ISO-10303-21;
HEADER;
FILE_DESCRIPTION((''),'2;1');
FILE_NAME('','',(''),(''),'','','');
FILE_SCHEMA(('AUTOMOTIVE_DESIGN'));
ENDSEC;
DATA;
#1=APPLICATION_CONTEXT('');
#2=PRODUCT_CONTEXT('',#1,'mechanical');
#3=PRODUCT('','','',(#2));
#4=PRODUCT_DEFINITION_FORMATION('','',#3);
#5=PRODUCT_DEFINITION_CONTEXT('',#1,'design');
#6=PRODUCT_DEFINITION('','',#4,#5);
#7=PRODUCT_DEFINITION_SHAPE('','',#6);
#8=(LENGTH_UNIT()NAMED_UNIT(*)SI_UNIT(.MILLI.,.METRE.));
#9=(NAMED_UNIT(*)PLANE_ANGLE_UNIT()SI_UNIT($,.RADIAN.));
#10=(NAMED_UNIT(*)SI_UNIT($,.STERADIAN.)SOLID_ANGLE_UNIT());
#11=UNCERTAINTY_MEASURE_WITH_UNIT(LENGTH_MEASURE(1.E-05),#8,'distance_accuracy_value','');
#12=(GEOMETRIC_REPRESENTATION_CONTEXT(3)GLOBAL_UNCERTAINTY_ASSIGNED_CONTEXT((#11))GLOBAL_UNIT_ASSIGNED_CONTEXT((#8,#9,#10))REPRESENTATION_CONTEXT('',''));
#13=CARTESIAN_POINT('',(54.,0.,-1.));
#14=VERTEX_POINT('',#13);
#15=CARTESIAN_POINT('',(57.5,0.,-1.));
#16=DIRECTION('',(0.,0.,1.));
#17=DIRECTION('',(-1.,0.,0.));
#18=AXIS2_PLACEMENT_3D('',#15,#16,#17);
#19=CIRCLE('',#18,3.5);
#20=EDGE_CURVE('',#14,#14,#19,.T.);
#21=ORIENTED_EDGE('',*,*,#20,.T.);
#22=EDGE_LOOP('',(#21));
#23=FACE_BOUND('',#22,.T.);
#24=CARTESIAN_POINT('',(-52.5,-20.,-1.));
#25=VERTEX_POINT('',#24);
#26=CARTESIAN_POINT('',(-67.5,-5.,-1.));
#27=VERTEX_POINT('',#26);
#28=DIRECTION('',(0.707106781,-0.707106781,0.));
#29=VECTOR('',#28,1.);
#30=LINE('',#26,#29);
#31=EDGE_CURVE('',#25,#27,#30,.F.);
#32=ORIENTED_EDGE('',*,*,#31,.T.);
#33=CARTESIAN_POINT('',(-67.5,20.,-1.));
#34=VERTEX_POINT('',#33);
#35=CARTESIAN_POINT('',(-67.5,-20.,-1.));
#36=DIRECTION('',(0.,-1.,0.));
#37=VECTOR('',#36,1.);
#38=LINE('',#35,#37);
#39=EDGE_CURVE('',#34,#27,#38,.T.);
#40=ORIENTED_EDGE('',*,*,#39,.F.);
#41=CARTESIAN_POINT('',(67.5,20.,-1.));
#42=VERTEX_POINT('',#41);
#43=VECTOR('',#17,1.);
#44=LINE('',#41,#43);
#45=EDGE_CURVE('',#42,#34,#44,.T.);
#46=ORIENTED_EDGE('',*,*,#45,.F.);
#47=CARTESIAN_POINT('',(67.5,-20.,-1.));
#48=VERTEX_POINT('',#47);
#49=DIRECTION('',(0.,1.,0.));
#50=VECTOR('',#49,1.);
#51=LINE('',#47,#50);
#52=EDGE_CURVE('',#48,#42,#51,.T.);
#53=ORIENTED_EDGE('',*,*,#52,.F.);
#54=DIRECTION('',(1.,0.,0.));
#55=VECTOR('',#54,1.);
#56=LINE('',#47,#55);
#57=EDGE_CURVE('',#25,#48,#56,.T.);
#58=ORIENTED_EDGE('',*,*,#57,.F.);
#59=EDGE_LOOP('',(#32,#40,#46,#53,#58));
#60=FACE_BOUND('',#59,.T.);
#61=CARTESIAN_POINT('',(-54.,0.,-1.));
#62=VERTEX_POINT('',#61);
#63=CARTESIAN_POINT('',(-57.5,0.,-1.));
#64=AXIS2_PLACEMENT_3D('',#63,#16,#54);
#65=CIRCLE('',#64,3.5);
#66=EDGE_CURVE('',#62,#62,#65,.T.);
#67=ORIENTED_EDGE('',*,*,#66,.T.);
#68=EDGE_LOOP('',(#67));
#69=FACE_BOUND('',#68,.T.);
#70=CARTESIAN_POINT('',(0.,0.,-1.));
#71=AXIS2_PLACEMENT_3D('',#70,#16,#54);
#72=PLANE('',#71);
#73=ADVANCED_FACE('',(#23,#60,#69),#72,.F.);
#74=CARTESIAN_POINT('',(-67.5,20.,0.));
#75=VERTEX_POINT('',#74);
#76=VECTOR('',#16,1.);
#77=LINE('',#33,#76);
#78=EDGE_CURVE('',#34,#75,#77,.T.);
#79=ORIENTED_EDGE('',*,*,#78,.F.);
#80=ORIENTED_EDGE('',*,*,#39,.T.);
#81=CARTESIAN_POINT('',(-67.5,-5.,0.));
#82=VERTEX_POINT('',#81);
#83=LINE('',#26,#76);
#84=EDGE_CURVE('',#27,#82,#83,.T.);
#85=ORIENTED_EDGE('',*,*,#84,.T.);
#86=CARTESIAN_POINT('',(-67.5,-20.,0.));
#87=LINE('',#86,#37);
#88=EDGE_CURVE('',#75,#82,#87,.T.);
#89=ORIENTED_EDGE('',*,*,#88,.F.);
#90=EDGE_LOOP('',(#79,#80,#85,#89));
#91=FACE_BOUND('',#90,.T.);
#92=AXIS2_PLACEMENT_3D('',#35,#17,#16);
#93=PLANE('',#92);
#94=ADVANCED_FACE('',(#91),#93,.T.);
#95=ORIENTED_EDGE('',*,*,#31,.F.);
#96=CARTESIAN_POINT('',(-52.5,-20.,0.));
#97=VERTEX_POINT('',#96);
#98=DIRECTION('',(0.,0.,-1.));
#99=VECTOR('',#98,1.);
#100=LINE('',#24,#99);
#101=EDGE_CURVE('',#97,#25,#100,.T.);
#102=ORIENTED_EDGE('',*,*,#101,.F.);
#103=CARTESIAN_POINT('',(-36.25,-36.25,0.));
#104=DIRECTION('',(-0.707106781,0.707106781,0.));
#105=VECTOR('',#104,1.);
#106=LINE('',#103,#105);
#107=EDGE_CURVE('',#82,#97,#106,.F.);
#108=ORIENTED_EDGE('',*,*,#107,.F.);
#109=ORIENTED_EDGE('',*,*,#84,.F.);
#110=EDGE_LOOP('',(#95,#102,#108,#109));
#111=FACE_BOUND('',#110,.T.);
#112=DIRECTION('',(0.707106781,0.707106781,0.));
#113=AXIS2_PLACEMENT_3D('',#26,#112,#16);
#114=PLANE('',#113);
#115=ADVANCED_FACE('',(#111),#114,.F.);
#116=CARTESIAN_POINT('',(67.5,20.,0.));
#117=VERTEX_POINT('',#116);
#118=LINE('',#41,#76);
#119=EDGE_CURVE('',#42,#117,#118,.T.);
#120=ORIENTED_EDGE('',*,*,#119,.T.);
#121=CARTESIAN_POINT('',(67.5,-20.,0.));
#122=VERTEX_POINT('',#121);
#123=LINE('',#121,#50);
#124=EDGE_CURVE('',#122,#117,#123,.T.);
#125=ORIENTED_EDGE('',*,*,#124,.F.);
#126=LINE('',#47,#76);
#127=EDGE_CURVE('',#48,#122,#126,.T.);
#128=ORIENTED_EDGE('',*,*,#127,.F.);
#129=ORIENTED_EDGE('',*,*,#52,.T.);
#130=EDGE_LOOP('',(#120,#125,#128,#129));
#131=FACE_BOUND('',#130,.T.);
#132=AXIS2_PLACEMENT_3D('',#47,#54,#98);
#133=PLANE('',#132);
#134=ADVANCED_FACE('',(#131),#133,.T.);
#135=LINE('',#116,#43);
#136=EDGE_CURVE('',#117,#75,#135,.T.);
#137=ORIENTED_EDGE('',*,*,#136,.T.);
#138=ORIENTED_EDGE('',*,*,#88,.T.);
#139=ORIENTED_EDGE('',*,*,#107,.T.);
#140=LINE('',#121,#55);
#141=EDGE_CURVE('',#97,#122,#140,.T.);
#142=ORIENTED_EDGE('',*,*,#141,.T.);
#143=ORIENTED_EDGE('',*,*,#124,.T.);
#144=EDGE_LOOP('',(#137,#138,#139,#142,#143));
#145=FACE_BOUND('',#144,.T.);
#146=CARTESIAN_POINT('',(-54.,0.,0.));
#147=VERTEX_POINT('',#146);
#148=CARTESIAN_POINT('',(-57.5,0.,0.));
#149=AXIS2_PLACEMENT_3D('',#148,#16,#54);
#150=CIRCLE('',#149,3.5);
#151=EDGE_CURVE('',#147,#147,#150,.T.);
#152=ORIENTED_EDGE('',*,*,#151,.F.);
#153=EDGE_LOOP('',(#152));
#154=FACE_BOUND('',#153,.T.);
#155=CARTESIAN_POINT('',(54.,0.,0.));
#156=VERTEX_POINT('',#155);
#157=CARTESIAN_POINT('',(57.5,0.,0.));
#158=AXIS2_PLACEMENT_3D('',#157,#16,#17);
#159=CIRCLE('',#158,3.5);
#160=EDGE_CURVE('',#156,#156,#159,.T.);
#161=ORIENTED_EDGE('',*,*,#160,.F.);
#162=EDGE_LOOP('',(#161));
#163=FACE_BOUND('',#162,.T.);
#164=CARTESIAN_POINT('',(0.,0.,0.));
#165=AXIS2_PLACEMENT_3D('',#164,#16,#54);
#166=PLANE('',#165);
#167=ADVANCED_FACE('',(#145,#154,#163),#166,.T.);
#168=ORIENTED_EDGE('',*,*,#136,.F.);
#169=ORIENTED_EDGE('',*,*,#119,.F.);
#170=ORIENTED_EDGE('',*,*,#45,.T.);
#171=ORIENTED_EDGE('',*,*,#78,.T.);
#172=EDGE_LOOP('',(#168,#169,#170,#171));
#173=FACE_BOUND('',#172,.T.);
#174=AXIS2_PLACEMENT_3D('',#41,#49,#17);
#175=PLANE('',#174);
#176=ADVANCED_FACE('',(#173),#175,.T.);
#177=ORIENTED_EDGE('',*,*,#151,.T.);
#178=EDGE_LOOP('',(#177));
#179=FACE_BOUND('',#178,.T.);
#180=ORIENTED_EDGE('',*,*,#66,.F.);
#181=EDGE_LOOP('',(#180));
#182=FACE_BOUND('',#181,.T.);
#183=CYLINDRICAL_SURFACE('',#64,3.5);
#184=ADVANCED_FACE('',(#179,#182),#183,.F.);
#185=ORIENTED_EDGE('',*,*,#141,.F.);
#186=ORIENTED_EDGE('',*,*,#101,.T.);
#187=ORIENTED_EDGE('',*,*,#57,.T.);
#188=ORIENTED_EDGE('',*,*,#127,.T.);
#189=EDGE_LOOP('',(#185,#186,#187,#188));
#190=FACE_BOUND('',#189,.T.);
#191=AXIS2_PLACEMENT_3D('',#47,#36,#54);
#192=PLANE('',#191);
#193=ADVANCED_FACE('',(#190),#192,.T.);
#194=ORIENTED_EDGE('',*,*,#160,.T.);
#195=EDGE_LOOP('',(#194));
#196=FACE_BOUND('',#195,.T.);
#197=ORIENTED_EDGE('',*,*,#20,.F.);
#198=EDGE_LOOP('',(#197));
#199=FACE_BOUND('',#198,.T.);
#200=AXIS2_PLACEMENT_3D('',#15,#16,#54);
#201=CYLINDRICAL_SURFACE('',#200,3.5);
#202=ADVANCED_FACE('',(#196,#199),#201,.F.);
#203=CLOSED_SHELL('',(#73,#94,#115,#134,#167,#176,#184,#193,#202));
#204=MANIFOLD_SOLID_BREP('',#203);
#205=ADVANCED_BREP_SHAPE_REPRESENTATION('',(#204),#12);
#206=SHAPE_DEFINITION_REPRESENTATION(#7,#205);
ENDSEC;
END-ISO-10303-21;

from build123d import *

# Parameters (mm, degrees)
SKETCH_1_W             = 135
SKETCH_1_H             = 40
SKETCH_1_R             = 3.5
SM_BASE_FLANGE_1_DEPTH = 1
CHAMFER_1_SIZE         = 15


# Sheet-metal steps are written as plain solids
with BuildPart() as part:
    # Sketch 1 → Базовая кромка1 (new body)
    with BuildSketch(Plane.XY):
        Rectangle(SKETCH_1_W, SKETCH_1_H)
        with Locations((-57.5, 0)):
            Circle(SKETCH_1_R, mode=Mode.SUBTRACT)
        with Locations(Location((57.5, 0, 0), (0, 0, 180))):
            Circle(SKETCH_1_R, mode=Mode.SUBTRACT)
    extrude(amount=-SM_BASE_FLANGE_1_DEPTH)

    # Фаска1
    chamfer_1_edges = [part.edges().sort_by_distance(p)[0] for p in [
        (-67.5, -20, -0.5),
    ]]
    chamfer(chamfer_1_edges, length=CHAMFER_1_SIZE)


solid = part.part
